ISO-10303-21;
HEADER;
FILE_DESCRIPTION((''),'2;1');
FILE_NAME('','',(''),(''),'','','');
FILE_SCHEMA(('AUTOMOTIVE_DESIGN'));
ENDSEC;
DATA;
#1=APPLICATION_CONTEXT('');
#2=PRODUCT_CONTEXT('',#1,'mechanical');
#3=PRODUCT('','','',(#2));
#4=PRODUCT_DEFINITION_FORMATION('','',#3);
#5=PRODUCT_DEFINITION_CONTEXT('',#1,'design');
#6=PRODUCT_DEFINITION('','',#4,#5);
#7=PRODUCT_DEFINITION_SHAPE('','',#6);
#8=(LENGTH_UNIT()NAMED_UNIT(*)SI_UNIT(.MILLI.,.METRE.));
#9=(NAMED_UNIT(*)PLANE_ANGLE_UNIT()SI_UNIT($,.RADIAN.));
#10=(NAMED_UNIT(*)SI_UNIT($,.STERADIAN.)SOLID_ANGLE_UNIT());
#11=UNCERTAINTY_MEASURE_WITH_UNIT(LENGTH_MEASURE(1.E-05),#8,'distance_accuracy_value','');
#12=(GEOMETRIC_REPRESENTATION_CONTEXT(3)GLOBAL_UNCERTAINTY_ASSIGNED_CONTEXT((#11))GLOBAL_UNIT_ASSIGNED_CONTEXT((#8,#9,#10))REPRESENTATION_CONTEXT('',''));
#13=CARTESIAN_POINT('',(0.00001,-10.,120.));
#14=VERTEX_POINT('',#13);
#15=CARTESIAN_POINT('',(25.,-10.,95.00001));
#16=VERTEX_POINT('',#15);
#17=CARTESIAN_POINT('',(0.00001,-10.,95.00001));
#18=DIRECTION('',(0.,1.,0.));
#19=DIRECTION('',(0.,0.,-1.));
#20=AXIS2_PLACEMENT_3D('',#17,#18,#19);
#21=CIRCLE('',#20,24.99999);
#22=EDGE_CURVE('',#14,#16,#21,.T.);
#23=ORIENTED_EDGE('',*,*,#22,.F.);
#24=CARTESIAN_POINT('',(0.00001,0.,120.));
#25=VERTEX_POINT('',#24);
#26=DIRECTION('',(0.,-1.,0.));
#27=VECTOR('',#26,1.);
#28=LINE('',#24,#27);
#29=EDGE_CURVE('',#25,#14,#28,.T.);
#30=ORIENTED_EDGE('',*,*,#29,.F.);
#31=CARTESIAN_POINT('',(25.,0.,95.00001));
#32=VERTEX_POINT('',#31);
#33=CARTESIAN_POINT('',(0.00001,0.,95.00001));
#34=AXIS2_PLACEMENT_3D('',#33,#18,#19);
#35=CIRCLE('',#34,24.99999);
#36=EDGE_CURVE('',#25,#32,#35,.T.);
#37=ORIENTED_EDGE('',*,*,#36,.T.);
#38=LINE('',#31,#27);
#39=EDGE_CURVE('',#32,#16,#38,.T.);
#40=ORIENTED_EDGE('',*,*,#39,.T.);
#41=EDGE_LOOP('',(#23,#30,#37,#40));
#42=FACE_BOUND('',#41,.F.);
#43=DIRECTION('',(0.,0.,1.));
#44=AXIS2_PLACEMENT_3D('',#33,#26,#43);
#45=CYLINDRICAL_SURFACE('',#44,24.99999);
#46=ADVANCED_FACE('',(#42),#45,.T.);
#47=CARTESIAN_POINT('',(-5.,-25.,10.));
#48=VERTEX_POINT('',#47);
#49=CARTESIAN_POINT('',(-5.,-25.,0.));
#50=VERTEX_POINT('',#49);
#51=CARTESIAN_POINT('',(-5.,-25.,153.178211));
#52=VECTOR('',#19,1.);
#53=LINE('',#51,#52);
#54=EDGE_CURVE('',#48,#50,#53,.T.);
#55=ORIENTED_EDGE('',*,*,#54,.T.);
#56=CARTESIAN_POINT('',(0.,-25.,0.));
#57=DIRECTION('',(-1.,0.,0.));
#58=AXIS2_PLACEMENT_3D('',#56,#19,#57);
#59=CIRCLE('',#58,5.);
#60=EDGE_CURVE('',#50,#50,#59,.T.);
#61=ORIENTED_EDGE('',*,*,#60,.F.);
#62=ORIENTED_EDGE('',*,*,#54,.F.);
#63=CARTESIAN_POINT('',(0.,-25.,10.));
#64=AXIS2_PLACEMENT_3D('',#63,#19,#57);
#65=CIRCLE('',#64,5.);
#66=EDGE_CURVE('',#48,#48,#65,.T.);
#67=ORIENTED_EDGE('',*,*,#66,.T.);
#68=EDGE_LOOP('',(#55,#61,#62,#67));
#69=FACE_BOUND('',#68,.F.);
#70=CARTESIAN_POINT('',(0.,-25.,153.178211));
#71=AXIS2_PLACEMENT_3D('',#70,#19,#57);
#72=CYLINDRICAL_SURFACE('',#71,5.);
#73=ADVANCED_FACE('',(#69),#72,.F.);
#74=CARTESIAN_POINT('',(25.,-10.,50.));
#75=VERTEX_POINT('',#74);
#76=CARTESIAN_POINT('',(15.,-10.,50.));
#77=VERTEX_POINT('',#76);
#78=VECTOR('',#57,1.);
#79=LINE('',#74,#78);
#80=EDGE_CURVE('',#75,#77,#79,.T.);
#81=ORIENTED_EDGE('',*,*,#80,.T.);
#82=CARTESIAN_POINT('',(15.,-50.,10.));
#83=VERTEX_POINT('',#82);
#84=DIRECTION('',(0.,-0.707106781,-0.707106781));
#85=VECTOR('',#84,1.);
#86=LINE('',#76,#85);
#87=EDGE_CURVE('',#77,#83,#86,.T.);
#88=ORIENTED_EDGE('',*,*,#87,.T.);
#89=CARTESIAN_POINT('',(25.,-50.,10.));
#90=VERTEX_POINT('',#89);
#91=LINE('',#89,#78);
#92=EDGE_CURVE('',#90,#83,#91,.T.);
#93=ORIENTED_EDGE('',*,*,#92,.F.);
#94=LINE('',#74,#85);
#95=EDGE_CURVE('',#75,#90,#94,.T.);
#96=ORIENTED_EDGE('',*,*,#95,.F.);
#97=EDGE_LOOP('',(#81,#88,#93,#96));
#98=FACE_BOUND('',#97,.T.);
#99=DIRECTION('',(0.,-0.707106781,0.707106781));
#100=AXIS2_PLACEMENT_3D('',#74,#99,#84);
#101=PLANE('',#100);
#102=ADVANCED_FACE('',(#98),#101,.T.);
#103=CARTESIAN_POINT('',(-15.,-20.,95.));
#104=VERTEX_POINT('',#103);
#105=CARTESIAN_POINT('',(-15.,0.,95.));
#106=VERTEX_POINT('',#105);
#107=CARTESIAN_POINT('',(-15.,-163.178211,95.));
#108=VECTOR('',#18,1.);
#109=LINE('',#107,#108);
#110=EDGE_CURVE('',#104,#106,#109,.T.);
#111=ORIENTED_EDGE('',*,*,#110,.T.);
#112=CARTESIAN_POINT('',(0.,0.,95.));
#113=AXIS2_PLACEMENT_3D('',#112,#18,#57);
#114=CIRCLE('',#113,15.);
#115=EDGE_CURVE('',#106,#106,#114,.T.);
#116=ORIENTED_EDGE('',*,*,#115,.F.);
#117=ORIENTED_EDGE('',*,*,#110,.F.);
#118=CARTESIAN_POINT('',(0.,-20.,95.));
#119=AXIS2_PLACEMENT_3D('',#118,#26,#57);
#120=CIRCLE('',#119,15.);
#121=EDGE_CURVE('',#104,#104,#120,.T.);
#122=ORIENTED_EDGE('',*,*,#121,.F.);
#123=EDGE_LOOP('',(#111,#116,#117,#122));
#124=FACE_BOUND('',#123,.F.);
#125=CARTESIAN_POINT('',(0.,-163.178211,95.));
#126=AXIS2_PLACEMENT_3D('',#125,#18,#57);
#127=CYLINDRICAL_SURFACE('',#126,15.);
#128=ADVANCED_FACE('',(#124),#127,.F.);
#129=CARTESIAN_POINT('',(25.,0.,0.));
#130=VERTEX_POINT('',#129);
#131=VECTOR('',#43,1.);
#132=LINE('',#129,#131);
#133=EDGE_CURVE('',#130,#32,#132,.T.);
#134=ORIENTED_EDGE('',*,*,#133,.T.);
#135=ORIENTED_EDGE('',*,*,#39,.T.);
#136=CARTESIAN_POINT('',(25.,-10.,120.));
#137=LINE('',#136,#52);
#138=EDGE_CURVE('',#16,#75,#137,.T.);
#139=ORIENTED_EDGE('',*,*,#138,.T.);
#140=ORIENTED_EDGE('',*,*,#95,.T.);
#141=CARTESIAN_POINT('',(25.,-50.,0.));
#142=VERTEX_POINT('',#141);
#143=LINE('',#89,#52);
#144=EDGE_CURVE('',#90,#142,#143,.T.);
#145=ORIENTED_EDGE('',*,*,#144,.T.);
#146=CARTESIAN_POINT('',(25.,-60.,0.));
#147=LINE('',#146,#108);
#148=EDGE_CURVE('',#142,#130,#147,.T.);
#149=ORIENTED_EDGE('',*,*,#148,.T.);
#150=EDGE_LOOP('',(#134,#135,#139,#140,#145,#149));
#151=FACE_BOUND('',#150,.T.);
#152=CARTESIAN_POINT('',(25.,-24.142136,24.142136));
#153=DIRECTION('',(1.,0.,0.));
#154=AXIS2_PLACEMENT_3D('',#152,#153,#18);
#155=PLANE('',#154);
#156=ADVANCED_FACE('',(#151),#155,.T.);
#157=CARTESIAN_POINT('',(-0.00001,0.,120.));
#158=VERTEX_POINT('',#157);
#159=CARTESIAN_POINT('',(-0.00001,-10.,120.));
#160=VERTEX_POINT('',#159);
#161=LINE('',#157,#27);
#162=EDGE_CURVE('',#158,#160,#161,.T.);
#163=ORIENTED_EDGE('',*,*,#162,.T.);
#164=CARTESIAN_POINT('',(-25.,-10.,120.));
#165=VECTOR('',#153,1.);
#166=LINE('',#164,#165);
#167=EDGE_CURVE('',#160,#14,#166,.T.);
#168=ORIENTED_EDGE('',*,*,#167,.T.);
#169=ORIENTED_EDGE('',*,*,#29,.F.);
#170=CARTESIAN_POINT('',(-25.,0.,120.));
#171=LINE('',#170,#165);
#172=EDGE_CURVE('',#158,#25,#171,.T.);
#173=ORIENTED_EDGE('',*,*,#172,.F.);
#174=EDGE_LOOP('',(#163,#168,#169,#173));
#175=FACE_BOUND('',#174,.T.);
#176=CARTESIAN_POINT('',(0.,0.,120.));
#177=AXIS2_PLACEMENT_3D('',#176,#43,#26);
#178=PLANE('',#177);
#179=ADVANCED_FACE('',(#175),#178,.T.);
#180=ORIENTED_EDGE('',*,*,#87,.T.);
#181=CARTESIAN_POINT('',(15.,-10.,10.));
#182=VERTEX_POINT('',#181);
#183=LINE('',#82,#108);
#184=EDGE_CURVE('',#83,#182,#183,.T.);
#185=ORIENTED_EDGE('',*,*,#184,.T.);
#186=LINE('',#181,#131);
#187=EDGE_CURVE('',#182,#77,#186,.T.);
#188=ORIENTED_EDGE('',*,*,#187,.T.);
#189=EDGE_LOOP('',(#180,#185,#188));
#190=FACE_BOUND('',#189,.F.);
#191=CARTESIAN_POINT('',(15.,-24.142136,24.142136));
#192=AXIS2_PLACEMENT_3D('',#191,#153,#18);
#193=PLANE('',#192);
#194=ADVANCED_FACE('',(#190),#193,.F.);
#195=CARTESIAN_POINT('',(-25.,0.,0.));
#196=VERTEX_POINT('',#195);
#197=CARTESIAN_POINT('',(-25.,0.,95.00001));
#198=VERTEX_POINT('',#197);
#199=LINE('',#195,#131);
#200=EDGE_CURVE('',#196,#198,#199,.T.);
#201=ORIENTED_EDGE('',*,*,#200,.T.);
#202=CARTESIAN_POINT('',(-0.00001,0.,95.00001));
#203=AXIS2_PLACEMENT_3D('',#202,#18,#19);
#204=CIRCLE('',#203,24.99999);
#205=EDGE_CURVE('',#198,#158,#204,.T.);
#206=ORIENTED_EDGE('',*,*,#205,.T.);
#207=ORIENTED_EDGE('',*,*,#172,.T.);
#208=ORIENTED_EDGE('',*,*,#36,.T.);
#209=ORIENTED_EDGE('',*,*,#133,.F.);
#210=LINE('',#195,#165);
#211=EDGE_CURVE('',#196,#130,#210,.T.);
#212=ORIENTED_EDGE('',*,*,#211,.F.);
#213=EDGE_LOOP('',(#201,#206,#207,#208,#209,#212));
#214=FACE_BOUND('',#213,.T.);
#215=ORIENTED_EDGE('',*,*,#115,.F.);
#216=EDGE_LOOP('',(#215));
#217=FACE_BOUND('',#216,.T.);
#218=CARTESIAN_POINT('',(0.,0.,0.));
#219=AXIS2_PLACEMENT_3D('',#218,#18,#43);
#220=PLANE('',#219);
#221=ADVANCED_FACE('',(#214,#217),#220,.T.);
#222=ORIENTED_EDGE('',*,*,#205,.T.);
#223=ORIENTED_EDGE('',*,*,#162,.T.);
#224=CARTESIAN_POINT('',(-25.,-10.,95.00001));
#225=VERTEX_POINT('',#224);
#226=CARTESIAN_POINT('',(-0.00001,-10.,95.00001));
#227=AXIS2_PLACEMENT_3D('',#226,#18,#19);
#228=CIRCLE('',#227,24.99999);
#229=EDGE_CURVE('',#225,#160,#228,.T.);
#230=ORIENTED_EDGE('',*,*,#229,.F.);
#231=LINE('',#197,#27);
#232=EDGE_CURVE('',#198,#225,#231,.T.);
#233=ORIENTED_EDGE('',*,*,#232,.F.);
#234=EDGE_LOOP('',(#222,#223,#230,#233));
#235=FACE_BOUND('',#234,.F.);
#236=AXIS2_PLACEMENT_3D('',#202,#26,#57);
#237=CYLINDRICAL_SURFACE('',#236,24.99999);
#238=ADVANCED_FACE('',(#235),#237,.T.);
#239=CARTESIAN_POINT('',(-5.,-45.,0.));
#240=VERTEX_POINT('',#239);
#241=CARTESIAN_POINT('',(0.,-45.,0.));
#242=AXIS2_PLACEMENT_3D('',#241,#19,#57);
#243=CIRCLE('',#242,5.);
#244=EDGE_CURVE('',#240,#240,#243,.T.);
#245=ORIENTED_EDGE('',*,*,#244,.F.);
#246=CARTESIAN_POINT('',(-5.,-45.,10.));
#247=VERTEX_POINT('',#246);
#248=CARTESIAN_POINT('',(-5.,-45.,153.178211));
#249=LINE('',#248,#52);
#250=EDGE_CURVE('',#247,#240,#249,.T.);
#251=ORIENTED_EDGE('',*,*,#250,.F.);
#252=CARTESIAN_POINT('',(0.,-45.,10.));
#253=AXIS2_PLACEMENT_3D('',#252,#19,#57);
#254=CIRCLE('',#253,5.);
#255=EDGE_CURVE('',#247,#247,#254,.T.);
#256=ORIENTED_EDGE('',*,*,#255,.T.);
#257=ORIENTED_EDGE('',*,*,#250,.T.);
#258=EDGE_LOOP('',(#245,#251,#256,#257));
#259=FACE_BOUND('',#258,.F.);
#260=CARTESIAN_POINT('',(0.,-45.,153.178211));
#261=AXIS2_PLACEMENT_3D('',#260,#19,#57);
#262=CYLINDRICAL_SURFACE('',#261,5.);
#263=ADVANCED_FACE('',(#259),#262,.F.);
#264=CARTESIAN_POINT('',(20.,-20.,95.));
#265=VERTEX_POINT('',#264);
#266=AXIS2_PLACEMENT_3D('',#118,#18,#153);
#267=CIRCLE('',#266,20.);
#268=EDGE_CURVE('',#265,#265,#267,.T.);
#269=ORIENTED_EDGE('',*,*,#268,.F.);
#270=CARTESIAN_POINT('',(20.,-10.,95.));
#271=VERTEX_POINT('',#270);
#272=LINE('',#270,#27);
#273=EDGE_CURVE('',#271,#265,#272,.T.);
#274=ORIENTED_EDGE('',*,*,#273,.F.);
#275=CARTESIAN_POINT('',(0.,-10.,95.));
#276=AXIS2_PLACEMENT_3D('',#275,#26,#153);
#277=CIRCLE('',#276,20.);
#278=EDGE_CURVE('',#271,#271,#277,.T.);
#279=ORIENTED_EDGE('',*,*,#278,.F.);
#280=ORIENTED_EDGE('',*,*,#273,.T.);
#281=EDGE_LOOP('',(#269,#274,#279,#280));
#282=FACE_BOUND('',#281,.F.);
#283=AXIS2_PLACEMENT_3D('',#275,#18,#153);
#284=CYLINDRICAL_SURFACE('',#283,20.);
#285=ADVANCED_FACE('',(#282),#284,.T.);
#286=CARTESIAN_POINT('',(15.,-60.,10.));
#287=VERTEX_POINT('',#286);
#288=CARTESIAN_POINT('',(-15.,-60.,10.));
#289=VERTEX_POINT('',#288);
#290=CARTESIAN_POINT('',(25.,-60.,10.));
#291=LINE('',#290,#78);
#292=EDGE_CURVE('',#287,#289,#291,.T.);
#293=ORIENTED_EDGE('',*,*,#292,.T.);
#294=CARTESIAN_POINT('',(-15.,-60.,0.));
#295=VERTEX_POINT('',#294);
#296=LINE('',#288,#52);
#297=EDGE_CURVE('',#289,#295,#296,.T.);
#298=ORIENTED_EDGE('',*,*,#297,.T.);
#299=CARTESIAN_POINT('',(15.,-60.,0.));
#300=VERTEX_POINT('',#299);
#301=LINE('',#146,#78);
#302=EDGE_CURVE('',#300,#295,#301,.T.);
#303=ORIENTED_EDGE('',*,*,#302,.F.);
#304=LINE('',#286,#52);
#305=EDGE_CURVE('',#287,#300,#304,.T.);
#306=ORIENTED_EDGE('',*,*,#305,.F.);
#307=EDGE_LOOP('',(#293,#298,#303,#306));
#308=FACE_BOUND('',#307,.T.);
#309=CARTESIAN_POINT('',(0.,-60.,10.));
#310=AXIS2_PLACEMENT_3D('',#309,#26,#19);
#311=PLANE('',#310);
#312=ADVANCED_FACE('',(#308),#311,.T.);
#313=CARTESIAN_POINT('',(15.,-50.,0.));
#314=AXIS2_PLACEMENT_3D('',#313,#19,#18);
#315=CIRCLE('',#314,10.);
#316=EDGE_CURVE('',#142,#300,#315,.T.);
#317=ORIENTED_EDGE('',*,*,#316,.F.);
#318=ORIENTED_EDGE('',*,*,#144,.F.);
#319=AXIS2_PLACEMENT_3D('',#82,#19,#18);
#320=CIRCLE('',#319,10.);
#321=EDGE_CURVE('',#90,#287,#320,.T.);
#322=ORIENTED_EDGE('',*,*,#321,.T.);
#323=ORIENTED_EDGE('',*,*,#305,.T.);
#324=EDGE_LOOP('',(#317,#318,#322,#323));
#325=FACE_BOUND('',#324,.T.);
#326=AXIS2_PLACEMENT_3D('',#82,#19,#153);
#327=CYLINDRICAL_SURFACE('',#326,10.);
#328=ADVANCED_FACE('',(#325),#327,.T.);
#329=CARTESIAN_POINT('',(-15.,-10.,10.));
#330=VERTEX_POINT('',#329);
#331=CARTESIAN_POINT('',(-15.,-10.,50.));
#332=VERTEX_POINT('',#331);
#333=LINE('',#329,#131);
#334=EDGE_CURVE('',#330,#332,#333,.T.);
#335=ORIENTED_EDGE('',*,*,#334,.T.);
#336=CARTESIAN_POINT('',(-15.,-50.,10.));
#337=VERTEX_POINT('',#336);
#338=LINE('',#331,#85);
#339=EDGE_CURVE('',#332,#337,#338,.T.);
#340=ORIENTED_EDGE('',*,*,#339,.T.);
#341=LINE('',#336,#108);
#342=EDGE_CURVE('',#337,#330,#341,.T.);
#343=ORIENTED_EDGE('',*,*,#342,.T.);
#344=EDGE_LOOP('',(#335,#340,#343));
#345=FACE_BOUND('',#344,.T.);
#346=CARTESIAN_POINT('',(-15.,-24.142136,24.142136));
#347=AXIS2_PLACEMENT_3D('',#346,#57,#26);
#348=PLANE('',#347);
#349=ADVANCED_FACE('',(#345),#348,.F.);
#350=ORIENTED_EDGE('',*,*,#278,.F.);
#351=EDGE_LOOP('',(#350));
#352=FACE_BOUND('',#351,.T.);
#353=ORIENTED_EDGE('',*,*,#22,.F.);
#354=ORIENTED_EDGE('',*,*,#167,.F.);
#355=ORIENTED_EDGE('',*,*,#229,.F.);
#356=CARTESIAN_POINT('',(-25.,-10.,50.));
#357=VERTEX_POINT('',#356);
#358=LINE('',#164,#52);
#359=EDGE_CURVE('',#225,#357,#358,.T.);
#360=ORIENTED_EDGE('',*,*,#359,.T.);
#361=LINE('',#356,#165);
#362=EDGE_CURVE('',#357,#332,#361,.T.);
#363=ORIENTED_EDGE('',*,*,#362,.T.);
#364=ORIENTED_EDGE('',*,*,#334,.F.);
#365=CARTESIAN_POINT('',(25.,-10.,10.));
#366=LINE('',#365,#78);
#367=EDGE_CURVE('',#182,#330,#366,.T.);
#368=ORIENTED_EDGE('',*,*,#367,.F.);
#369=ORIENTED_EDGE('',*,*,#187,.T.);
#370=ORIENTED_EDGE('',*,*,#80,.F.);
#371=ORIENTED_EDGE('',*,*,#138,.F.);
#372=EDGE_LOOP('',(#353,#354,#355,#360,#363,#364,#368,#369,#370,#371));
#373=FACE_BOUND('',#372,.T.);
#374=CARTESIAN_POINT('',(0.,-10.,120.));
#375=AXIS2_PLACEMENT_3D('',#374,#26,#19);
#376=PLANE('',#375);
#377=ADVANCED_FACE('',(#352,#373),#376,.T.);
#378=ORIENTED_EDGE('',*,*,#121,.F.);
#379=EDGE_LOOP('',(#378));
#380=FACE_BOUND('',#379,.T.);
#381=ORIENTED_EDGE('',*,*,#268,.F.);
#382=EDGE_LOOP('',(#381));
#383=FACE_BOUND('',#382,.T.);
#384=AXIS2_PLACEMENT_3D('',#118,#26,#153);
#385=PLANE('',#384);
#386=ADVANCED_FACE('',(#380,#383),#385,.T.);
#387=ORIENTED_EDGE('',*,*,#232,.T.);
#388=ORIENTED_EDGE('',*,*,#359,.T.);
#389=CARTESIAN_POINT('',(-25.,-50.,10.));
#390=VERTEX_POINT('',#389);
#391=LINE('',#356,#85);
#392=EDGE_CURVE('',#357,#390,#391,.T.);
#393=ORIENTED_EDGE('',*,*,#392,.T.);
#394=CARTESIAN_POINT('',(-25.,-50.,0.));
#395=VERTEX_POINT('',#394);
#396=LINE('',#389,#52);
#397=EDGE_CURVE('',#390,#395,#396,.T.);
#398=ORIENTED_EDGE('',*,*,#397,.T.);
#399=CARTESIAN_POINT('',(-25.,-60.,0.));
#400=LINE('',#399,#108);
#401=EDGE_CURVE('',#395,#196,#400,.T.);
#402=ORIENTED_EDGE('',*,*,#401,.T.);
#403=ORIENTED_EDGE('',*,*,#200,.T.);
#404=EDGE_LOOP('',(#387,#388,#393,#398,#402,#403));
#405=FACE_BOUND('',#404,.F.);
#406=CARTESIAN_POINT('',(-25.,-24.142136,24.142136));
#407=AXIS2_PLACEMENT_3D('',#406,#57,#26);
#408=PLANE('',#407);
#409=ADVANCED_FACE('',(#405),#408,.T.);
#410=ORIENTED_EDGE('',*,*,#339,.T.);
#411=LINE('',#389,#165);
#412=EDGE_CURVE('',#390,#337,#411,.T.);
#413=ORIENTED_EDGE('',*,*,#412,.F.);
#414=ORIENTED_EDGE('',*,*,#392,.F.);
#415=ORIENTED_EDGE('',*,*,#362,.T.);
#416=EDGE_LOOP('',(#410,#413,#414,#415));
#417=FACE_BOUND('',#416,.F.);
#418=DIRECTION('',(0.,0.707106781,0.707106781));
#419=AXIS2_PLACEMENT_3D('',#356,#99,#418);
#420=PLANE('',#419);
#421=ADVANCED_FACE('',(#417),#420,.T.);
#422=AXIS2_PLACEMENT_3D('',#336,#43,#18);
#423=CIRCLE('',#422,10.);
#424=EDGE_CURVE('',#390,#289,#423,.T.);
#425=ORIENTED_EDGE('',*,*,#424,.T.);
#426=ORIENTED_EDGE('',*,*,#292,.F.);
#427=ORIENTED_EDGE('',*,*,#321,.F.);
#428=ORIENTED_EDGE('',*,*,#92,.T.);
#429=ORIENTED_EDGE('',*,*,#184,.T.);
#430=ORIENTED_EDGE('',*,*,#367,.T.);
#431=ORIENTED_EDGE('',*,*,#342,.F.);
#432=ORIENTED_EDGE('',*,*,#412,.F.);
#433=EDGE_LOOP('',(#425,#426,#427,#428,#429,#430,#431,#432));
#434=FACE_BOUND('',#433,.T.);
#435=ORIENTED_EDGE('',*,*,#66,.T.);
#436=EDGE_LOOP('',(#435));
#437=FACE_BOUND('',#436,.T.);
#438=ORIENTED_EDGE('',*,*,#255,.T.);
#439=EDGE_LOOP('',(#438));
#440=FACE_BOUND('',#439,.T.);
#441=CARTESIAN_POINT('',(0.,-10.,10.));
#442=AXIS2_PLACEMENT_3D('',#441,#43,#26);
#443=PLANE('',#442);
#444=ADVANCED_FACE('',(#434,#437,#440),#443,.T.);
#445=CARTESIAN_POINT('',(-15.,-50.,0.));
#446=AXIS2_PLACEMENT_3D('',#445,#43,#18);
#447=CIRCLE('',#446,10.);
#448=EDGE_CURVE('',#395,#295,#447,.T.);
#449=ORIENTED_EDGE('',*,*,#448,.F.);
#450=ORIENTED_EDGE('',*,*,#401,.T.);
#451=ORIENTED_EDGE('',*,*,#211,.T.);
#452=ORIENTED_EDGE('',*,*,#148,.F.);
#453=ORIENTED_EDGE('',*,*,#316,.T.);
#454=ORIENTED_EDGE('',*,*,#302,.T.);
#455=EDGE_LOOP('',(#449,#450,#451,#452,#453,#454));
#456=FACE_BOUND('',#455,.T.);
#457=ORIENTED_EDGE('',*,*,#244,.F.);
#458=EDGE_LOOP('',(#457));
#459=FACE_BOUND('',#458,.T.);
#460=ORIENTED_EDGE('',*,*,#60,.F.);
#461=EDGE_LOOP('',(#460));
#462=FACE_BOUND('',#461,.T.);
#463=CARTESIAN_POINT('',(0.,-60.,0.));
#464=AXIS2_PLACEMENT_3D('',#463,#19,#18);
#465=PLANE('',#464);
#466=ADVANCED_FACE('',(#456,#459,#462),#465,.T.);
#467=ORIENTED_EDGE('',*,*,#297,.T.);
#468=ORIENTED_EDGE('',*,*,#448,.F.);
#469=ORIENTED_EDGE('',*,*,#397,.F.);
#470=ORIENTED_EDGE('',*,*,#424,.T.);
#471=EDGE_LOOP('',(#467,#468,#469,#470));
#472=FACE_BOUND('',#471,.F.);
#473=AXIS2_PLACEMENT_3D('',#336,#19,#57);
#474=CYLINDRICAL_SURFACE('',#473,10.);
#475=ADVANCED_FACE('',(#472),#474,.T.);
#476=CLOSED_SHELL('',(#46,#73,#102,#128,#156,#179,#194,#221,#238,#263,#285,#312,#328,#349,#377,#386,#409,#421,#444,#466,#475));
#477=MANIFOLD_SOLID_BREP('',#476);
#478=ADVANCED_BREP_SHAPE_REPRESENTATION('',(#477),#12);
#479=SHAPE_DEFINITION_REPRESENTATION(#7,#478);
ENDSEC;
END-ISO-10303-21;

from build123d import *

# Parameters (mm, degrees)
F1_DEPTH = 25
F3_DEPTH = 10
F4_R     = 20
F5_DEPTH = 10
F6_R     = 24.99999
F8_D     = 30
F9_R     = 10
F11_D    = 10


# Not quite as in the source:
# - a fillet or chamfer is up to 0.001 mm smaller than in the source, because OpenCascade refuses the exact size
# - a pattern or mirror of a feature is missing from the dataset's text; its kind, count and spacing are read off the source's solid


with BuildPart() as f1:
    # F0 (on Right) → F1 (new body, symmetric)
    with BuildSketch(Plane.YZ):
        Polygon((-60, 0), (0, 0), (0, 120), (-10, 120), (-10, 10), (-60, 10), align=None)
    extrude(amount=F1_DEPTH, both=True)

    # F2 (on face) → F3 (join)
    with BuildSketch(Plane.YZ.offset(25)):
        Polygon((-50, 10), (-10, 10), (-10, 50), align=None)
    f3 = extrude(amount=-F3_DEPTH)

    # F3_copies: F3 across plane
    add(f3.mirror(Plane(origin=(0, 0, 0), x_dir=(0, 0, -1), z_dir=(-1, 0, 0))))

    # F4 (on face) → F5 (join)
    with BuildSketch(Plane.XZ.offset(10)):
        with Locations((0, 95)):
            Circle(F4_R)
    extrude(amount=F5_DEPTH)

    # F6 (radius 25 in the source; OpenCascade refuses exactly that, so slightly less here)
    f6_edges = [f1.edges().sort_by_distance(p)[0] for p in [
        (-25, -5, 120),
        (25, -5, 120),
    ]]
    fillet(f6_edges, radius=F6_R)

    # F8 (through all)
    with Locations(Plane.XZ.offset(20)):
        with Locations((0, 95)):
            Hole(F8_D / 2)

    # F9
    f9_edges = [f1.edges().sort_by_distance(p)[0] for p in [
        (-25, -60, 5),
        (25, -60, 5),
    ]]
    fillet(f9_edges, radius=F9_R)

    # F11 (through all)
    with Locations(Plane.XY.offset(10)):
        with Locations((0, -25), (0, -45)):
            Hole(F11_D / 2)


solid = f1.part
